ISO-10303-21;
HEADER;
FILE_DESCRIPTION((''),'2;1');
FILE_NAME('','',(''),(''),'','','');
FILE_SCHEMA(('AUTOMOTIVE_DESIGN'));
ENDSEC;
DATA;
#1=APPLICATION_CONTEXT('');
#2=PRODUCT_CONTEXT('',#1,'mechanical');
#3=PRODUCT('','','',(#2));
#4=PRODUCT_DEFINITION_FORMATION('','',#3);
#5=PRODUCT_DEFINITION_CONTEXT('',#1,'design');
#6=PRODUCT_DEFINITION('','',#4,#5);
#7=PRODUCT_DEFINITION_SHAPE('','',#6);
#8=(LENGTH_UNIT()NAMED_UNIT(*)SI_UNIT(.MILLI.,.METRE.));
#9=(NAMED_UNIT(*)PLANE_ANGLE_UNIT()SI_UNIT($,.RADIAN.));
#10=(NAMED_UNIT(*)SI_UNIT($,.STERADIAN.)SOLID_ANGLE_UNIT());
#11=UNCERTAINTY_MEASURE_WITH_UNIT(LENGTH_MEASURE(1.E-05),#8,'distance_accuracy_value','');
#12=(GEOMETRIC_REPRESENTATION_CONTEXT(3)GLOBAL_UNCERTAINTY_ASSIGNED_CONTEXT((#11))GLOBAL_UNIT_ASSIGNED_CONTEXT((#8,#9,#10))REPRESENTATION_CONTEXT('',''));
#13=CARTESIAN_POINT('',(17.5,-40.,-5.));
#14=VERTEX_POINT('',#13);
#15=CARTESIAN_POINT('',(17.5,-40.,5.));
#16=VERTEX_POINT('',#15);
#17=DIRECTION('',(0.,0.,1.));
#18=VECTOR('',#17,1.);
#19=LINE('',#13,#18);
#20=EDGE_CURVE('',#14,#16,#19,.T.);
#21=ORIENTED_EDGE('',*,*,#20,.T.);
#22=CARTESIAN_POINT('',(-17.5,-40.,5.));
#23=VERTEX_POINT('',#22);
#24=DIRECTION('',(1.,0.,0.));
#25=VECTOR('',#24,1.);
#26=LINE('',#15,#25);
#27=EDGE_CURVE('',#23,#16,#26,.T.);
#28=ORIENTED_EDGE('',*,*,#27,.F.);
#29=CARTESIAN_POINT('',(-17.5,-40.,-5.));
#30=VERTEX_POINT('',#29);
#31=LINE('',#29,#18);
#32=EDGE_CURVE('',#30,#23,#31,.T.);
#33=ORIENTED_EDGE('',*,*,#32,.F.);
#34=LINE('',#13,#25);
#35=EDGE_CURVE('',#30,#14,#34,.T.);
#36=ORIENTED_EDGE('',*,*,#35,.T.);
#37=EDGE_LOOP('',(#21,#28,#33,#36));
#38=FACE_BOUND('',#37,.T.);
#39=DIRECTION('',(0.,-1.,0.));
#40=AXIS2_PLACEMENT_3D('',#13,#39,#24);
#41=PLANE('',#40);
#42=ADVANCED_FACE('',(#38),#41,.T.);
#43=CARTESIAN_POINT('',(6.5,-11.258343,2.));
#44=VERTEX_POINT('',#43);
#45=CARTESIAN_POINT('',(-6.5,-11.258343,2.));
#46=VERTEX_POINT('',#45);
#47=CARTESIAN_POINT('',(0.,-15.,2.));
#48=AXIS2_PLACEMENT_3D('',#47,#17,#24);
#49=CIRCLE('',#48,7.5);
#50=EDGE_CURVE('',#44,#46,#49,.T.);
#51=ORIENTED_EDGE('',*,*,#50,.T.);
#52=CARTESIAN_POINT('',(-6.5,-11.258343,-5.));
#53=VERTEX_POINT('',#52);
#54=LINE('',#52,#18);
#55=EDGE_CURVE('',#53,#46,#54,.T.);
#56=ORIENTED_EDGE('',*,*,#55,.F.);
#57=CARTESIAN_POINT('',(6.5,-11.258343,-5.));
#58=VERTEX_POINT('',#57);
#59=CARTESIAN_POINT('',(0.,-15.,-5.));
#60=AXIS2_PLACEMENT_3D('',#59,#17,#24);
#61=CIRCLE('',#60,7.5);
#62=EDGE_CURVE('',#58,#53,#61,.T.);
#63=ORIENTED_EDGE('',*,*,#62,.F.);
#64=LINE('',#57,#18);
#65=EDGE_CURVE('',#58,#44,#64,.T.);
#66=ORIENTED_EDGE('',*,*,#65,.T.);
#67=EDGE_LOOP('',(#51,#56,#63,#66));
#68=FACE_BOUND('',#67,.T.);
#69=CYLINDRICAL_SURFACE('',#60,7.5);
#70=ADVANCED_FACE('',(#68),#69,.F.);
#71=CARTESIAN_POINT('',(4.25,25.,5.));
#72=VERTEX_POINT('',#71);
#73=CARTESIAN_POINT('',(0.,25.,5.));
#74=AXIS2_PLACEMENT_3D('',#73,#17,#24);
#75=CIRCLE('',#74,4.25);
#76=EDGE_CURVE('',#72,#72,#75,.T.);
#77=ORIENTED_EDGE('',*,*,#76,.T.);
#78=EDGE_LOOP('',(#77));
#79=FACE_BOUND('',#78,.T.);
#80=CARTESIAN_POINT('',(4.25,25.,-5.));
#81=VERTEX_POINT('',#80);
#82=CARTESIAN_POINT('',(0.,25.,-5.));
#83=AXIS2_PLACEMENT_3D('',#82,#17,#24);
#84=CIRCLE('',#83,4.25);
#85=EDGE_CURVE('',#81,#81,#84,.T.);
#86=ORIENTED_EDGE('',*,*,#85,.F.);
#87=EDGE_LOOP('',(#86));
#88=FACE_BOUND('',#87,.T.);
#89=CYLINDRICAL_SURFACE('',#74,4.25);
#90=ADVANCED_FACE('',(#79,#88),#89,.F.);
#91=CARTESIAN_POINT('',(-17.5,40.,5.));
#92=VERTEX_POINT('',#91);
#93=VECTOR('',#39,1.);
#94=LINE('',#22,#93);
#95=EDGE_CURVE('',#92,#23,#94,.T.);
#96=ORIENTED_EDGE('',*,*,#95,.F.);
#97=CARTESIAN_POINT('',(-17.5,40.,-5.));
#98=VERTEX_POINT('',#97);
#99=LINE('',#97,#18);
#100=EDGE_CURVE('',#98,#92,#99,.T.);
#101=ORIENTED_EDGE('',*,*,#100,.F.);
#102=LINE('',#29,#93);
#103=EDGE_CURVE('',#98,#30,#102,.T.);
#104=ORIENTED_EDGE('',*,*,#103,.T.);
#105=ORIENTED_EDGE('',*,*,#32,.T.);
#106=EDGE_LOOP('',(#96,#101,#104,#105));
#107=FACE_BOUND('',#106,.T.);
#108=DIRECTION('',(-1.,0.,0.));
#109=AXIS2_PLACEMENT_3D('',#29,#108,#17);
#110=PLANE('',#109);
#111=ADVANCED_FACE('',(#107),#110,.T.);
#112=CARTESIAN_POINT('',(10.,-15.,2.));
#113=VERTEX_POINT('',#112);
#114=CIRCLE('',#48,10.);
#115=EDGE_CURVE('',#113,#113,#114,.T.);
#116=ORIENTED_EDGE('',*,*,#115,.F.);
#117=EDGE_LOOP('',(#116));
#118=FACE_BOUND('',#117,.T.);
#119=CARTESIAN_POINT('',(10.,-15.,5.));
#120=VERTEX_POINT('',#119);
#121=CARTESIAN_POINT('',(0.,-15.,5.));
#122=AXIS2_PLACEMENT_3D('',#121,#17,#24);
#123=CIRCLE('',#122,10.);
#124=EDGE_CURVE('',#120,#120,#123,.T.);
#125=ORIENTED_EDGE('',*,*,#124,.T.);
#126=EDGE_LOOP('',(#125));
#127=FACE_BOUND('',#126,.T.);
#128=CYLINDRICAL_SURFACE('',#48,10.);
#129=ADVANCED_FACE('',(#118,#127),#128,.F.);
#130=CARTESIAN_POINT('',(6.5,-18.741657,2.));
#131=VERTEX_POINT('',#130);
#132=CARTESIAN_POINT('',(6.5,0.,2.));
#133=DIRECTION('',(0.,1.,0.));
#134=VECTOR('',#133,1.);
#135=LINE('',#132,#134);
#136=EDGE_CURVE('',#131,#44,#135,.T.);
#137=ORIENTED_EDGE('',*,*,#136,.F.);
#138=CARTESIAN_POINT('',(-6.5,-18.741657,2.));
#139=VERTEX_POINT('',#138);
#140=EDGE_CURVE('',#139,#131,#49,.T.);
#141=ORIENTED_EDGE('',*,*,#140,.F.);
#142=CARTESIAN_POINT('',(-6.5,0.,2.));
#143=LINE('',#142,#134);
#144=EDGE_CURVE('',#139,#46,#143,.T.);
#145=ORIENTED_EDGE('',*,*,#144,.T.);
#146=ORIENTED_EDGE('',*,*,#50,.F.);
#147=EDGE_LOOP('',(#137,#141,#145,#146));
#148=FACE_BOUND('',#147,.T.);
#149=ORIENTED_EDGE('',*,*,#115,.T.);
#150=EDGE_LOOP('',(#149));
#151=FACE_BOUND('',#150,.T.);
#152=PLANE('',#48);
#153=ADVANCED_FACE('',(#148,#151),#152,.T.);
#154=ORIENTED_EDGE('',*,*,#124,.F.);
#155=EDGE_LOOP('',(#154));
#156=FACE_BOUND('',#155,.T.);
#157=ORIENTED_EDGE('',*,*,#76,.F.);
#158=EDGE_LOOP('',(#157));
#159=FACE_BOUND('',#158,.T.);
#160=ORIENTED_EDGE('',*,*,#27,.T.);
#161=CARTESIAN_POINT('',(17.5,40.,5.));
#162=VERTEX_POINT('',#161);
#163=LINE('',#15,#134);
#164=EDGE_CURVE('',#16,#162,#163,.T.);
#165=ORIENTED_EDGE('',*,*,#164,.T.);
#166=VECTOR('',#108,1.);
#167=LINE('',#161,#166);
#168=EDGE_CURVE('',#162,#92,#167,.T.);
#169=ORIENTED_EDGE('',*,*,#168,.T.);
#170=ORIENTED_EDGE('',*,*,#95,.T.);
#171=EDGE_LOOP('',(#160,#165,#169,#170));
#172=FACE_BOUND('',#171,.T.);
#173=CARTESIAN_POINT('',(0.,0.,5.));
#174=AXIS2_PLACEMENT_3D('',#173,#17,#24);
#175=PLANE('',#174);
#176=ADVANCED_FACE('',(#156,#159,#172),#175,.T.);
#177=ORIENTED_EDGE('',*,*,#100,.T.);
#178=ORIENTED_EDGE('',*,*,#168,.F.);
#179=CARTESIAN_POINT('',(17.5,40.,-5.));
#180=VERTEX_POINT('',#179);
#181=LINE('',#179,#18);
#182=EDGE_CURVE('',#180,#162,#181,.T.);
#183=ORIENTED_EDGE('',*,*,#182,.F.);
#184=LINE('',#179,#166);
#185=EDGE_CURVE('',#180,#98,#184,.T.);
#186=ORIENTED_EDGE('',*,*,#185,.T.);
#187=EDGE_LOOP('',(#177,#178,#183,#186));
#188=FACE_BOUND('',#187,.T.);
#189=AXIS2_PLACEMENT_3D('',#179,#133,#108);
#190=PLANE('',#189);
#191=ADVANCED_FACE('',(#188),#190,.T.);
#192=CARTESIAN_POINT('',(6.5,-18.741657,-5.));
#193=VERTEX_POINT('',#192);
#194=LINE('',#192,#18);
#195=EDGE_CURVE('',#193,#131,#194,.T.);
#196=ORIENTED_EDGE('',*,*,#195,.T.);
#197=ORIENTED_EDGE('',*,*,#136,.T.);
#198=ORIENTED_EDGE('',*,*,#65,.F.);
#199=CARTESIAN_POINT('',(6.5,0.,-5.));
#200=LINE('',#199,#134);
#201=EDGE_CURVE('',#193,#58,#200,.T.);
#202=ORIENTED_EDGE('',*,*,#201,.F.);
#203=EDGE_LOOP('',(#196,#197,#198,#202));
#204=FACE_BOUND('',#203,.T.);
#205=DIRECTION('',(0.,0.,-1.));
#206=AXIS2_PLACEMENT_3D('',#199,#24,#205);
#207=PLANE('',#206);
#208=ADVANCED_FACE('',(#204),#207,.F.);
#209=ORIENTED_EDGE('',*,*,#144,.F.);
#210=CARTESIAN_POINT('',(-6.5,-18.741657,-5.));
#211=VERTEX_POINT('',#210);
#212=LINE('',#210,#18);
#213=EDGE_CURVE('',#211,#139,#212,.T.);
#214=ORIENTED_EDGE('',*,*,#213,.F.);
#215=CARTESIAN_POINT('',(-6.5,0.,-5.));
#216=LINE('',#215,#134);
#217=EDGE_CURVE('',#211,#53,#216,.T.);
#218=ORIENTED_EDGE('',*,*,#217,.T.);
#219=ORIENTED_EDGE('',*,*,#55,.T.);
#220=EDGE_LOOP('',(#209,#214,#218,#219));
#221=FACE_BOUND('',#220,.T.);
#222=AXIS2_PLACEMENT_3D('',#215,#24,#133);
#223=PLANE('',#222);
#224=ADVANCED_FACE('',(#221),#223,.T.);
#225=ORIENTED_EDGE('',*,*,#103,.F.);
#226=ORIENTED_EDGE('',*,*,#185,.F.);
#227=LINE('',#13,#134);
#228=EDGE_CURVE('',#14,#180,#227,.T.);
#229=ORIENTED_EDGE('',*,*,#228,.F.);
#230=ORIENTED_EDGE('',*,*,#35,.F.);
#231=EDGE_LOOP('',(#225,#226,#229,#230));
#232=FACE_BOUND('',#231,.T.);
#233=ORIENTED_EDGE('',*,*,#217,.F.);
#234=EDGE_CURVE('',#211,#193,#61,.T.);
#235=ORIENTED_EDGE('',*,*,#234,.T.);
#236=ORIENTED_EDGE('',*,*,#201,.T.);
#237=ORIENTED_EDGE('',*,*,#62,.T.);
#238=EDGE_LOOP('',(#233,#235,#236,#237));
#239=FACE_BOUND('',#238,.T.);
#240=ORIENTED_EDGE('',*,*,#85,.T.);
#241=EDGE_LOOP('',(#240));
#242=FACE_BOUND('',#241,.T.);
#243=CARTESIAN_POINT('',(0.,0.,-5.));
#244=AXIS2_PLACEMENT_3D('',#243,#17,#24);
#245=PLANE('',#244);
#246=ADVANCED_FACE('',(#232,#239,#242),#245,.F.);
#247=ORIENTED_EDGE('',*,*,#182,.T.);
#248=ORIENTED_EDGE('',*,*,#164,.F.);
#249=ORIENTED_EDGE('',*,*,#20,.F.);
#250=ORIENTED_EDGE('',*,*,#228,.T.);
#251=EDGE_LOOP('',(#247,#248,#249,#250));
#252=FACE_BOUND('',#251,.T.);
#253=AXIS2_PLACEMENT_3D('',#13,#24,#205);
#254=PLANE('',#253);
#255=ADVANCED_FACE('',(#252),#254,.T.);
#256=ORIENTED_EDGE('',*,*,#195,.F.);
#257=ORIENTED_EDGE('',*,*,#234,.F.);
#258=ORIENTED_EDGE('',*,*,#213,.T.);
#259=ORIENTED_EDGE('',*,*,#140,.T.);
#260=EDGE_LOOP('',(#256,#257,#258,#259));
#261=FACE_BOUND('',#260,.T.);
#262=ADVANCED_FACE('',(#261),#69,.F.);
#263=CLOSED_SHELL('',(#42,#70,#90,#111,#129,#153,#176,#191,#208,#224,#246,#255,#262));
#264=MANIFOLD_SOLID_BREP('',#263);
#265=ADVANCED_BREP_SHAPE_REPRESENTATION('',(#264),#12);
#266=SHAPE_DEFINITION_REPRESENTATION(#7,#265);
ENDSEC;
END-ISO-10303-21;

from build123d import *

# Parameters (mm, degrees)
FLANGE_BASE1_START             = -5
FLANGE_BASE1_OUTLINE_W         = 35
FLANGE_BASE1_OUTLINE_H         = 80
FLANGE_BASE1_DEPTH             = 10
FURO_ROSCADO_DE_M10X1_51_D     = 8.5
FURO_ROSCADO_DE_M10X1_51_DEPTH = 29.946342369
FURO_ROSCADO_DE_M10X1_51_TIP   = 2.553657631
ESBO_O9_R                      = 10
CORTE_EXTRUS_O2_DEPTH          = 3
CORTE_EXTRUS_O3_DEPTH          = 45.218208919


# Read off the part's stored shape, not the designer's step: Flange-base1
with BuildPart() as part:
    # Flange-base1 outline → Flange-base1 (new body)
    with BuildSketch(Plane.XY.offset(FLANGE_BASE1_START)):
        Rectangle(FLANGE_BASE1_OUTLINE_W, FLANGE_BASE1_OUTLINE_H)
    extrude(amount=FLANGE_BASE1_DEPTH)

    # Furo roscado de M10x1.51
    with Locations(Plane.XY.offset(5)):
        with Locations((0, 25)):
            Hole(FURO_ROSCADO_DE_M10X1_51_D / 2, depth=FURO_ROSCADO_DE_M10X1_51_DEPTH)
            with Locations((0, 0, -(FURO_ROSCADO_DE_M10X1_51_DEPTH + FURO_ROSCADO_DE_M10X1_51_TIP / 2))):  # 118° drill point
                Cone(0, FURO_ROSCADO_DE_M10X1_51_D / 2, FURO_ROSCADO_DE_M10X1_51_TIP, mode=Mode.SUBTRACT)

    # Esboço9 → Corte-extrusão2 (cut)
    with BuildSketch(Plane.XY.offset(5)):
        with Locations((0, -15)):
            Circle(ESBO_O9_R)
    extrude(amount=-CORTE_EXTRUS_O2_DEPTH, mode=Mode.SUBTRACT)

    # Esboço10 → Corte-extrusão3 (cut, through all)
    with BuildSketch(Plane.XY.offset(2)):
        with BuildLine():
            Line((-6.5, -11.258342613), (-6.5, -18.741657387))
            ThreePointArc((-6.5, -18.741657387), (0, -22.5), (6.5, -18.741657387))
            Line((6.5, -18.741657387), (6.5, -11.258342613))
            ThreePointArc((6.5, -11.258342613), (0, -7.5), (-6.5, -11.258342613))
        make_face()
    extrude(amount=-CORTE_EXTRUS_O3_DEPTH, mode=Mode.SUBTRACT)


solid = part.part
